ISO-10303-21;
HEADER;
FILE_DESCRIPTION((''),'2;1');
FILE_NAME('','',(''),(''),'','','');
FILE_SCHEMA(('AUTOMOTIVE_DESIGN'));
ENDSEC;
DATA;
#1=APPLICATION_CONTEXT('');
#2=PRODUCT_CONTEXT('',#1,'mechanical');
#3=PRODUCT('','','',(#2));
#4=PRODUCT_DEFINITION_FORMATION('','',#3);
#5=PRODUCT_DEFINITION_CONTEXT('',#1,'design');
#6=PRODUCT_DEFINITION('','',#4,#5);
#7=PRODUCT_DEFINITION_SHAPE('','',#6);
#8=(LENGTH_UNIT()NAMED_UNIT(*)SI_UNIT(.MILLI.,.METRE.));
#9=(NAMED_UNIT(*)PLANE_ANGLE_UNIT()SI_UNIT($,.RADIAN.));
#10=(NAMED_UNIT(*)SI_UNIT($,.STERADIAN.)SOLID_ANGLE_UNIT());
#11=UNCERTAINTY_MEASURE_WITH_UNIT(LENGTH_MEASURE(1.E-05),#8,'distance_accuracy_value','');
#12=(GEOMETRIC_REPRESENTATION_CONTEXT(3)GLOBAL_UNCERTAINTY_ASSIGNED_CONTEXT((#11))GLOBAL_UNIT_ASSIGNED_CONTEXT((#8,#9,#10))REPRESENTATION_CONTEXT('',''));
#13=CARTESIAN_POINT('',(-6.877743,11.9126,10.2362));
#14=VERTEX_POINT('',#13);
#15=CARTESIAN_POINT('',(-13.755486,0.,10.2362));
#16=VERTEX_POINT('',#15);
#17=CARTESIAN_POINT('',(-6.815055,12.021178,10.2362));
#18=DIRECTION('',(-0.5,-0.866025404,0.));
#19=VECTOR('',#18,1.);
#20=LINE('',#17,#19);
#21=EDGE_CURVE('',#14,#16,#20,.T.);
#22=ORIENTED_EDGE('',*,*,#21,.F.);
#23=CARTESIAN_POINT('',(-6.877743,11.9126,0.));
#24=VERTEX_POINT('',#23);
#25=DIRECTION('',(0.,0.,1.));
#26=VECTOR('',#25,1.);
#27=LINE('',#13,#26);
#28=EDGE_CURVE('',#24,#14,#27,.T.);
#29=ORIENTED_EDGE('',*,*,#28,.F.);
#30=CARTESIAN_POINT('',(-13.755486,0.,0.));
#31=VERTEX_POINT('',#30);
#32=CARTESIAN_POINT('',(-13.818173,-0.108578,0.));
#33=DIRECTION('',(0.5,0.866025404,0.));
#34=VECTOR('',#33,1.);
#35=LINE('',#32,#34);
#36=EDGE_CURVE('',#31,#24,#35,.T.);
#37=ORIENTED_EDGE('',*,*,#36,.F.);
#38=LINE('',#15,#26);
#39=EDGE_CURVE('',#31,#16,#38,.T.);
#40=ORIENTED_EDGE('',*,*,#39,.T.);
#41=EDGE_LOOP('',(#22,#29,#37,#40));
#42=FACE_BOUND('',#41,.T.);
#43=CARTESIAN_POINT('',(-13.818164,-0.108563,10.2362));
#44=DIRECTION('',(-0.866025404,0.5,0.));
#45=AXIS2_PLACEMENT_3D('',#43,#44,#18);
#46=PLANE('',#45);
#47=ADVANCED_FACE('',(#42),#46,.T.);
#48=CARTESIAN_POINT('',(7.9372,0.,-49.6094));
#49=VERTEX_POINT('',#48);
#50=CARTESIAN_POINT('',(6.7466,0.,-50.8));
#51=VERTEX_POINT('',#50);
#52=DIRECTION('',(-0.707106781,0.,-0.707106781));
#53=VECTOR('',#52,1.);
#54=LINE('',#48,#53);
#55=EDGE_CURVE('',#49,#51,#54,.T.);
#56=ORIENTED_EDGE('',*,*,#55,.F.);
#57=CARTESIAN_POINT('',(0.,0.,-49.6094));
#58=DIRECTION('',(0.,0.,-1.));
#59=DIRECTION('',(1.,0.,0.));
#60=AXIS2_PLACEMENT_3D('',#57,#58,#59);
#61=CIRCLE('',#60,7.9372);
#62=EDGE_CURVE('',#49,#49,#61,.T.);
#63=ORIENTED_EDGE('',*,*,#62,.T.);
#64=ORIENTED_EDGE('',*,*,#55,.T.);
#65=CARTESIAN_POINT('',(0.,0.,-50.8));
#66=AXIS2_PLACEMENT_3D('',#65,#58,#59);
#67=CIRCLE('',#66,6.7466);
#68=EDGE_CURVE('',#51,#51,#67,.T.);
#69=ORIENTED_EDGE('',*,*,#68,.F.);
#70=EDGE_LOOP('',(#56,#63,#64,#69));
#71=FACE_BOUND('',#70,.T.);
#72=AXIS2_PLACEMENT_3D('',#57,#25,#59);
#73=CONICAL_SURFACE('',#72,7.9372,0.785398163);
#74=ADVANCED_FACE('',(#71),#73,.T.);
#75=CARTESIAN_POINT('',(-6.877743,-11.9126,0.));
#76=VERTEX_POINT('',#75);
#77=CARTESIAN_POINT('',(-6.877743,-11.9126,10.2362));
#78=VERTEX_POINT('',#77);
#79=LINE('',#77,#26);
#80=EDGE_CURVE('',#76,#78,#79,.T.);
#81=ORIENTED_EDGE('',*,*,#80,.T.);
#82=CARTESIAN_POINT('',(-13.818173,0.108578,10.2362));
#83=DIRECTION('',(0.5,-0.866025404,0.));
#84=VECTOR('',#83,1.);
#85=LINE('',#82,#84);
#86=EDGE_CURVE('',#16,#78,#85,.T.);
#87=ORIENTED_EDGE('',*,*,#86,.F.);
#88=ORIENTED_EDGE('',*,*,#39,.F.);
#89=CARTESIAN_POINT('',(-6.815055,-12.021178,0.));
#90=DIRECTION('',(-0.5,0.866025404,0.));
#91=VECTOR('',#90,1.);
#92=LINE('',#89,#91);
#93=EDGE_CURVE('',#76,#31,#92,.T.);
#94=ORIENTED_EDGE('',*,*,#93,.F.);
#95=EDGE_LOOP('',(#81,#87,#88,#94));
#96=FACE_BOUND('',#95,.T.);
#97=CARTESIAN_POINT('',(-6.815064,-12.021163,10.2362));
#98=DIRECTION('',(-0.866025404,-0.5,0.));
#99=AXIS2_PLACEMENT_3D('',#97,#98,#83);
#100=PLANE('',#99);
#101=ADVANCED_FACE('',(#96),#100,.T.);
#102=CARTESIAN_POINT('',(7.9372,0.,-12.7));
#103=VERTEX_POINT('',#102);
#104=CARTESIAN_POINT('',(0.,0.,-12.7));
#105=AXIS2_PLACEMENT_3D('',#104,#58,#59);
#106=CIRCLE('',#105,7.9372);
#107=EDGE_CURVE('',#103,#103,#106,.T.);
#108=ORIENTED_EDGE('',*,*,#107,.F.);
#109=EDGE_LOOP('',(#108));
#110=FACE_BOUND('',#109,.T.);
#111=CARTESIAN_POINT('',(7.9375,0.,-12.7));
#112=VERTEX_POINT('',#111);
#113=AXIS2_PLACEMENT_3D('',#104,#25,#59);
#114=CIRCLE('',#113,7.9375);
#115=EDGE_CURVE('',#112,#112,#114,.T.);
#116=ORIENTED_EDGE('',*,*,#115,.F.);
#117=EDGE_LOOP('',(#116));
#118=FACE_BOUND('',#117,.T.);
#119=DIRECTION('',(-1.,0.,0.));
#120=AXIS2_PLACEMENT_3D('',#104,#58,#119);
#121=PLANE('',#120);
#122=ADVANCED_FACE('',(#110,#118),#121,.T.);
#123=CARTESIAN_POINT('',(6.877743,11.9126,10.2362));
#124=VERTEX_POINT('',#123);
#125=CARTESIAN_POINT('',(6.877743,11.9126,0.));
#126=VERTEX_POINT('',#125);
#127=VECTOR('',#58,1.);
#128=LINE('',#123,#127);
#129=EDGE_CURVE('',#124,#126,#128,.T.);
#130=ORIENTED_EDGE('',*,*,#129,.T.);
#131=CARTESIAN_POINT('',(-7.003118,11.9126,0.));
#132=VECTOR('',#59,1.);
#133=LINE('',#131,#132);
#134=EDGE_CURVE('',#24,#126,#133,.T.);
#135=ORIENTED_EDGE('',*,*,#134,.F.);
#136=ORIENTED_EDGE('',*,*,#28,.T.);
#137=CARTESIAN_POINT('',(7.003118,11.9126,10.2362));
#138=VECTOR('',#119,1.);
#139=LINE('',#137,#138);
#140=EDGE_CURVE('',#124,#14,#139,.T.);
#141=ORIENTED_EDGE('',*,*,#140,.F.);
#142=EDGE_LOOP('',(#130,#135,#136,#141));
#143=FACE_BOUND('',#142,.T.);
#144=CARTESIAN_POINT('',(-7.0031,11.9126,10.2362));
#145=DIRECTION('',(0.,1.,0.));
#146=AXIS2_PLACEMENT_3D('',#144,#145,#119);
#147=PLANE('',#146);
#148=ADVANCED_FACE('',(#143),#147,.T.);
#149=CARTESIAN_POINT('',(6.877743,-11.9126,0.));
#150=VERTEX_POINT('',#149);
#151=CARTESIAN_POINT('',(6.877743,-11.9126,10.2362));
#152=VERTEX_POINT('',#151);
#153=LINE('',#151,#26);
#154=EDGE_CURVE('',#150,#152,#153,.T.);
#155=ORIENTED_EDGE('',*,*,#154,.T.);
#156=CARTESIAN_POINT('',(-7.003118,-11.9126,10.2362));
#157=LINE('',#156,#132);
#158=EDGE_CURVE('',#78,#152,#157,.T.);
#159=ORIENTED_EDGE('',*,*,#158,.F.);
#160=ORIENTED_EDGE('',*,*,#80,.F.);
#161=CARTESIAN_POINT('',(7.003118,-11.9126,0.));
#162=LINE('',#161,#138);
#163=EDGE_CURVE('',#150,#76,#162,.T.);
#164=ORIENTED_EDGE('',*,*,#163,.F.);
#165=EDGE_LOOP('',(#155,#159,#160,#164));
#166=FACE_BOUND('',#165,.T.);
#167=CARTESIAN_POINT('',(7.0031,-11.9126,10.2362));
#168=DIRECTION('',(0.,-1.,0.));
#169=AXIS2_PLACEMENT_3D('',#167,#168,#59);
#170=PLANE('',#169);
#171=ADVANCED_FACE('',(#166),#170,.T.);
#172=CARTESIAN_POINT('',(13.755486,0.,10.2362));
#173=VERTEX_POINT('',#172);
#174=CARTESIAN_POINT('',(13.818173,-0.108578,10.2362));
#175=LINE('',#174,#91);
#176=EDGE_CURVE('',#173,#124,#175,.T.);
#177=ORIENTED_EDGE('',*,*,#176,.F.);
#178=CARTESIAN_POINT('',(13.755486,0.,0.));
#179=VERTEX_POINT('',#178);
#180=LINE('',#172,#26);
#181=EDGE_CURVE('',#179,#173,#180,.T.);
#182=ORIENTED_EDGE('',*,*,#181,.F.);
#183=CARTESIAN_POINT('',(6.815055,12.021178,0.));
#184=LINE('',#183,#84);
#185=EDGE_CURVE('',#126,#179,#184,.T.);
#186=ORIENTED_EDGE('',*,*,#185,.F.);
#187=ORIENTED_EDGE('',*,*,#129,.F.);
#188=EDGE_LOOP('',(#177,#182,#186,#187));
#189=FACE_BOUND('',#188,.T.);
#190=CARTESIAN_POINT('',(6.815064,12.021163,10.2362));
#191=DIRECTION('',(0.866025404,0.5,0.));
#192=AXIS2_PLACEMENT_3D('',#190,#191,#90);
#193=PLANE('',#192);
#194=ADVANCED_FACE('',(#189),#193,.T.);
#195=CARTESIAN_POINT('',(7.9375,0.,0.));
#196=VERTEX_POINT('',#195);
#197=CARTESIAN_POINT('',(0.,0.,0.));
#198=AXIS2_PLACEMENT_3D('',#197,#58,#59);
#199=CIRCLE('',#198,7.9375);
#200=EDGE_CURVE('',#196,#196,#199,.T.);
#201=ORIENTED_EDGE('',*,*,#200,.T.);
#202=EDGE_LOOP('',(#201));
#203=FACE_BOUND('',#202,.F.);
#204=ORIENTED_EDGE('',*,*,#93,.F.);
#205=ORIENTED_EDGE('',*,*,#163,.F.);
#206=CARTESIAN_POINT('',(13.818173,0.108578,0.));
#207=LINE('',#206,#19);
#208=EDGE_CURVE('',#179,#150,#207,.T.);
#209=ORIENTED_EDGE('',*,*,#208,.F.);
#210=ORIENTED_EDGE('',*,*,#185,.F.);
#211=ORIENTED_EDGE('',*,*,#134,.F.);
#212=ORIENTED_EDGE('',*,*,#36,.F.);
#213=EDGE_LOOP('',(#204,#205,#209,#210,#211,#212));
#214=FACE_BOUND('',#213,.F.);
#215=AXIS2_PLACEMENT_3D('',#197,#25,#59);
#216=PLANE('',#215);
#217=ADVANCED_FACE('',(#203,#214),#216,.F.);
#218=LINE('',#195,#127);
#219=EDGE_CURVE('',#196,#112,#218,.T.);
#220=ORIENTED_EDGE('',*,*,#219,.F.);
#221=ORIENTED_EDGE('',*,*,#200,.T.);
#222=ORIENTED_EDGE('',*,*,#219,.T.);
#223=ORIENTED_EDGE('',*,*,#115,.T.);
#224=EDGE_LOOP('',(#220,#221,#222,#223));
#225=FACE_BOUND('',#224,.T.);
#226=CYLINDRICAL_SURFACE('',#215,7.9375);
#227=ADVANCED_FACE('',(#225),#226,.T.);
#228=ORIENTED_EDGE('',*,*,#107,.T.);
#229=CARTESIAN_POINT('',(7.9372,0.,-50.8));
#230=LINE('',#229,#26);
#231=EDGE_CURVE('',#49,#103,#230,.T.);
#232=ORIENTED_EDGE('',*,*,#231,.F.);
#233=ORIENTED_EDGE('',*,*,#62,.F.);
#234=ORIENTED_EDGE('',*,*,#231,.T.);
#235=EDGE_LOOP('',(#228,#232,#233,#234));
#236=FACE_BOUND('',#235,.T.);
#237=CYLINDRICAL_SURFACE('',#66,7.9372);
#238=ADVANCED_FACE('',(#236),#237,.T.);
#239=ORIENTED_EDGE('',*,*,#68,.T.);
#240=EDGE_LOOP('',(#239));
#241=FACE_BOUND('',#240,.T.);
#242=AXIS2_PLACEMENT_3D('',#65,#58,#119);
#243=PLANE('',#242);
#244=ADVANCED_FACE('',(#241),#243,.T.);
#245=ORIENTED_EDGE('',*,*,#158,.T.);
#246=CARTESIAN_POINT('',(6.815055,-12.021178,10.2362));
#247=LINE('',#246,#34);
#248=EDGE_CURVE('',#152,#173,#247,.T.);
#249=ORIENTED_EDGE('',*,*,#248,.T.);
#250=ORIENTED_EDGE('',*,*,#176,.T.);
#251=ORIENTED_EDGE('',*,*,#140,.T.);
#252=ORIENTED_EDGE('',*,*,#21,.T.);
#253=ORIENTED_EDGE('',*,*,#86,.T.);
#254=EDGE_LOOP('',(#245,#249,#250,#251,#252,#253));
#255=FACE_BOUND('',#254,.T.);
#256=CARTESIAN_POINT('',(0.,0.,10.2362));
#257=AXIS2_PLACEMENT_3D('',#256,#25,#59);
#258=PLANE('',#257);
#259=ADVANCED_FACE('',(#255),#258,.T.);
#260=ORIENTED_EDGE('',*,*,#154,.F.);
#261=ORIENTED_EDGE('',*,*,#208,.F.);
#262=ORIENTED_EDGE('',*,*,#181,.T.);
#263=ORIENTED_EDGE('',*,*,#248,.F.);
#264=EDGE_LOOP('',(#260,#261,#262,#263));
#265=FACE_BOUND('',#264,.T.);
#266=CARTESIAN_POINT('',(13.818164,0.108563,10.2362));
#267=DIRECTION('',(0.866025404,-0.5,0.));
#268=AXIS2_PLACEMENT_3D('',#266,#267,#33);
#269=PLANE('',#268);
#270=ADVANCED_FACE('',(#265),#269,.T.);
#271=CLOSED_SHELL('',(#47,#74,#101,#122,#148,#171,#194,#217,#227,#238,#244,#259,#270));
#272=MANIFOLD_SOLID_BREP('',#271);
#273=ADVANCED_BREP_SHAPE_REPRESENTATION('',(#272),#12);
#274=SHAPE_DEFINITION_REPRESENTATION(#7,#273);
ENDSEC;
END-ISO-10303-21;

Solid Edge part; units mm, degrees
sketch "Sketch1" plane through (0, 0, 0) normal (0, 0, 1) x (1, 0, 0)
  circle A0 centre (0, 0) radius 13.8186
  dimension "D1" = 27.6372
extrude "Protrusion1" add sketch "Sketch1" along normal blind 10.2362
sketch "Sketch2" plane through (0, 0, 0) normal (0, 0, -1) x (1, 0, 0)
  circle A0 centre (0, 0) radius 7.9375
extrude "Protrusion2" add sketch "Sketch2" along normal blind 50.8
sketch "Sketch3" plane through (0, 0, -50.8) normal (0, 0, -1) x (1, 0, 0)
  circle A0 centre (0, 0) radius 7.9372
extrude "Cutout1" cut sketch "Sketch3" against normal blind 38.1 flip side to cut
chamfer "Chamfer_1" distance 1.1906 angle 45 1 edges at (-7.9372, 0, -50.8)
sketch "Sketch4" plane through (0, 0, 10.2362) normal (0, 0, 1) x (1, 0, 0)
  line L0 (-7.0031, 11.9126) -> (7.0031, 11.9126)
  dimension "D1" = 23.8252
extrude "Cutout2" cut sketch "Sketch4" against normal up to next material side at (0, 11.9626, 10.2362)
pattern_circular "Pattern1" count 6 over 360 about axis through (0, 0, 10.2362) along (0, 0, 1) of "Cutout2"
properties part number "24101161"
